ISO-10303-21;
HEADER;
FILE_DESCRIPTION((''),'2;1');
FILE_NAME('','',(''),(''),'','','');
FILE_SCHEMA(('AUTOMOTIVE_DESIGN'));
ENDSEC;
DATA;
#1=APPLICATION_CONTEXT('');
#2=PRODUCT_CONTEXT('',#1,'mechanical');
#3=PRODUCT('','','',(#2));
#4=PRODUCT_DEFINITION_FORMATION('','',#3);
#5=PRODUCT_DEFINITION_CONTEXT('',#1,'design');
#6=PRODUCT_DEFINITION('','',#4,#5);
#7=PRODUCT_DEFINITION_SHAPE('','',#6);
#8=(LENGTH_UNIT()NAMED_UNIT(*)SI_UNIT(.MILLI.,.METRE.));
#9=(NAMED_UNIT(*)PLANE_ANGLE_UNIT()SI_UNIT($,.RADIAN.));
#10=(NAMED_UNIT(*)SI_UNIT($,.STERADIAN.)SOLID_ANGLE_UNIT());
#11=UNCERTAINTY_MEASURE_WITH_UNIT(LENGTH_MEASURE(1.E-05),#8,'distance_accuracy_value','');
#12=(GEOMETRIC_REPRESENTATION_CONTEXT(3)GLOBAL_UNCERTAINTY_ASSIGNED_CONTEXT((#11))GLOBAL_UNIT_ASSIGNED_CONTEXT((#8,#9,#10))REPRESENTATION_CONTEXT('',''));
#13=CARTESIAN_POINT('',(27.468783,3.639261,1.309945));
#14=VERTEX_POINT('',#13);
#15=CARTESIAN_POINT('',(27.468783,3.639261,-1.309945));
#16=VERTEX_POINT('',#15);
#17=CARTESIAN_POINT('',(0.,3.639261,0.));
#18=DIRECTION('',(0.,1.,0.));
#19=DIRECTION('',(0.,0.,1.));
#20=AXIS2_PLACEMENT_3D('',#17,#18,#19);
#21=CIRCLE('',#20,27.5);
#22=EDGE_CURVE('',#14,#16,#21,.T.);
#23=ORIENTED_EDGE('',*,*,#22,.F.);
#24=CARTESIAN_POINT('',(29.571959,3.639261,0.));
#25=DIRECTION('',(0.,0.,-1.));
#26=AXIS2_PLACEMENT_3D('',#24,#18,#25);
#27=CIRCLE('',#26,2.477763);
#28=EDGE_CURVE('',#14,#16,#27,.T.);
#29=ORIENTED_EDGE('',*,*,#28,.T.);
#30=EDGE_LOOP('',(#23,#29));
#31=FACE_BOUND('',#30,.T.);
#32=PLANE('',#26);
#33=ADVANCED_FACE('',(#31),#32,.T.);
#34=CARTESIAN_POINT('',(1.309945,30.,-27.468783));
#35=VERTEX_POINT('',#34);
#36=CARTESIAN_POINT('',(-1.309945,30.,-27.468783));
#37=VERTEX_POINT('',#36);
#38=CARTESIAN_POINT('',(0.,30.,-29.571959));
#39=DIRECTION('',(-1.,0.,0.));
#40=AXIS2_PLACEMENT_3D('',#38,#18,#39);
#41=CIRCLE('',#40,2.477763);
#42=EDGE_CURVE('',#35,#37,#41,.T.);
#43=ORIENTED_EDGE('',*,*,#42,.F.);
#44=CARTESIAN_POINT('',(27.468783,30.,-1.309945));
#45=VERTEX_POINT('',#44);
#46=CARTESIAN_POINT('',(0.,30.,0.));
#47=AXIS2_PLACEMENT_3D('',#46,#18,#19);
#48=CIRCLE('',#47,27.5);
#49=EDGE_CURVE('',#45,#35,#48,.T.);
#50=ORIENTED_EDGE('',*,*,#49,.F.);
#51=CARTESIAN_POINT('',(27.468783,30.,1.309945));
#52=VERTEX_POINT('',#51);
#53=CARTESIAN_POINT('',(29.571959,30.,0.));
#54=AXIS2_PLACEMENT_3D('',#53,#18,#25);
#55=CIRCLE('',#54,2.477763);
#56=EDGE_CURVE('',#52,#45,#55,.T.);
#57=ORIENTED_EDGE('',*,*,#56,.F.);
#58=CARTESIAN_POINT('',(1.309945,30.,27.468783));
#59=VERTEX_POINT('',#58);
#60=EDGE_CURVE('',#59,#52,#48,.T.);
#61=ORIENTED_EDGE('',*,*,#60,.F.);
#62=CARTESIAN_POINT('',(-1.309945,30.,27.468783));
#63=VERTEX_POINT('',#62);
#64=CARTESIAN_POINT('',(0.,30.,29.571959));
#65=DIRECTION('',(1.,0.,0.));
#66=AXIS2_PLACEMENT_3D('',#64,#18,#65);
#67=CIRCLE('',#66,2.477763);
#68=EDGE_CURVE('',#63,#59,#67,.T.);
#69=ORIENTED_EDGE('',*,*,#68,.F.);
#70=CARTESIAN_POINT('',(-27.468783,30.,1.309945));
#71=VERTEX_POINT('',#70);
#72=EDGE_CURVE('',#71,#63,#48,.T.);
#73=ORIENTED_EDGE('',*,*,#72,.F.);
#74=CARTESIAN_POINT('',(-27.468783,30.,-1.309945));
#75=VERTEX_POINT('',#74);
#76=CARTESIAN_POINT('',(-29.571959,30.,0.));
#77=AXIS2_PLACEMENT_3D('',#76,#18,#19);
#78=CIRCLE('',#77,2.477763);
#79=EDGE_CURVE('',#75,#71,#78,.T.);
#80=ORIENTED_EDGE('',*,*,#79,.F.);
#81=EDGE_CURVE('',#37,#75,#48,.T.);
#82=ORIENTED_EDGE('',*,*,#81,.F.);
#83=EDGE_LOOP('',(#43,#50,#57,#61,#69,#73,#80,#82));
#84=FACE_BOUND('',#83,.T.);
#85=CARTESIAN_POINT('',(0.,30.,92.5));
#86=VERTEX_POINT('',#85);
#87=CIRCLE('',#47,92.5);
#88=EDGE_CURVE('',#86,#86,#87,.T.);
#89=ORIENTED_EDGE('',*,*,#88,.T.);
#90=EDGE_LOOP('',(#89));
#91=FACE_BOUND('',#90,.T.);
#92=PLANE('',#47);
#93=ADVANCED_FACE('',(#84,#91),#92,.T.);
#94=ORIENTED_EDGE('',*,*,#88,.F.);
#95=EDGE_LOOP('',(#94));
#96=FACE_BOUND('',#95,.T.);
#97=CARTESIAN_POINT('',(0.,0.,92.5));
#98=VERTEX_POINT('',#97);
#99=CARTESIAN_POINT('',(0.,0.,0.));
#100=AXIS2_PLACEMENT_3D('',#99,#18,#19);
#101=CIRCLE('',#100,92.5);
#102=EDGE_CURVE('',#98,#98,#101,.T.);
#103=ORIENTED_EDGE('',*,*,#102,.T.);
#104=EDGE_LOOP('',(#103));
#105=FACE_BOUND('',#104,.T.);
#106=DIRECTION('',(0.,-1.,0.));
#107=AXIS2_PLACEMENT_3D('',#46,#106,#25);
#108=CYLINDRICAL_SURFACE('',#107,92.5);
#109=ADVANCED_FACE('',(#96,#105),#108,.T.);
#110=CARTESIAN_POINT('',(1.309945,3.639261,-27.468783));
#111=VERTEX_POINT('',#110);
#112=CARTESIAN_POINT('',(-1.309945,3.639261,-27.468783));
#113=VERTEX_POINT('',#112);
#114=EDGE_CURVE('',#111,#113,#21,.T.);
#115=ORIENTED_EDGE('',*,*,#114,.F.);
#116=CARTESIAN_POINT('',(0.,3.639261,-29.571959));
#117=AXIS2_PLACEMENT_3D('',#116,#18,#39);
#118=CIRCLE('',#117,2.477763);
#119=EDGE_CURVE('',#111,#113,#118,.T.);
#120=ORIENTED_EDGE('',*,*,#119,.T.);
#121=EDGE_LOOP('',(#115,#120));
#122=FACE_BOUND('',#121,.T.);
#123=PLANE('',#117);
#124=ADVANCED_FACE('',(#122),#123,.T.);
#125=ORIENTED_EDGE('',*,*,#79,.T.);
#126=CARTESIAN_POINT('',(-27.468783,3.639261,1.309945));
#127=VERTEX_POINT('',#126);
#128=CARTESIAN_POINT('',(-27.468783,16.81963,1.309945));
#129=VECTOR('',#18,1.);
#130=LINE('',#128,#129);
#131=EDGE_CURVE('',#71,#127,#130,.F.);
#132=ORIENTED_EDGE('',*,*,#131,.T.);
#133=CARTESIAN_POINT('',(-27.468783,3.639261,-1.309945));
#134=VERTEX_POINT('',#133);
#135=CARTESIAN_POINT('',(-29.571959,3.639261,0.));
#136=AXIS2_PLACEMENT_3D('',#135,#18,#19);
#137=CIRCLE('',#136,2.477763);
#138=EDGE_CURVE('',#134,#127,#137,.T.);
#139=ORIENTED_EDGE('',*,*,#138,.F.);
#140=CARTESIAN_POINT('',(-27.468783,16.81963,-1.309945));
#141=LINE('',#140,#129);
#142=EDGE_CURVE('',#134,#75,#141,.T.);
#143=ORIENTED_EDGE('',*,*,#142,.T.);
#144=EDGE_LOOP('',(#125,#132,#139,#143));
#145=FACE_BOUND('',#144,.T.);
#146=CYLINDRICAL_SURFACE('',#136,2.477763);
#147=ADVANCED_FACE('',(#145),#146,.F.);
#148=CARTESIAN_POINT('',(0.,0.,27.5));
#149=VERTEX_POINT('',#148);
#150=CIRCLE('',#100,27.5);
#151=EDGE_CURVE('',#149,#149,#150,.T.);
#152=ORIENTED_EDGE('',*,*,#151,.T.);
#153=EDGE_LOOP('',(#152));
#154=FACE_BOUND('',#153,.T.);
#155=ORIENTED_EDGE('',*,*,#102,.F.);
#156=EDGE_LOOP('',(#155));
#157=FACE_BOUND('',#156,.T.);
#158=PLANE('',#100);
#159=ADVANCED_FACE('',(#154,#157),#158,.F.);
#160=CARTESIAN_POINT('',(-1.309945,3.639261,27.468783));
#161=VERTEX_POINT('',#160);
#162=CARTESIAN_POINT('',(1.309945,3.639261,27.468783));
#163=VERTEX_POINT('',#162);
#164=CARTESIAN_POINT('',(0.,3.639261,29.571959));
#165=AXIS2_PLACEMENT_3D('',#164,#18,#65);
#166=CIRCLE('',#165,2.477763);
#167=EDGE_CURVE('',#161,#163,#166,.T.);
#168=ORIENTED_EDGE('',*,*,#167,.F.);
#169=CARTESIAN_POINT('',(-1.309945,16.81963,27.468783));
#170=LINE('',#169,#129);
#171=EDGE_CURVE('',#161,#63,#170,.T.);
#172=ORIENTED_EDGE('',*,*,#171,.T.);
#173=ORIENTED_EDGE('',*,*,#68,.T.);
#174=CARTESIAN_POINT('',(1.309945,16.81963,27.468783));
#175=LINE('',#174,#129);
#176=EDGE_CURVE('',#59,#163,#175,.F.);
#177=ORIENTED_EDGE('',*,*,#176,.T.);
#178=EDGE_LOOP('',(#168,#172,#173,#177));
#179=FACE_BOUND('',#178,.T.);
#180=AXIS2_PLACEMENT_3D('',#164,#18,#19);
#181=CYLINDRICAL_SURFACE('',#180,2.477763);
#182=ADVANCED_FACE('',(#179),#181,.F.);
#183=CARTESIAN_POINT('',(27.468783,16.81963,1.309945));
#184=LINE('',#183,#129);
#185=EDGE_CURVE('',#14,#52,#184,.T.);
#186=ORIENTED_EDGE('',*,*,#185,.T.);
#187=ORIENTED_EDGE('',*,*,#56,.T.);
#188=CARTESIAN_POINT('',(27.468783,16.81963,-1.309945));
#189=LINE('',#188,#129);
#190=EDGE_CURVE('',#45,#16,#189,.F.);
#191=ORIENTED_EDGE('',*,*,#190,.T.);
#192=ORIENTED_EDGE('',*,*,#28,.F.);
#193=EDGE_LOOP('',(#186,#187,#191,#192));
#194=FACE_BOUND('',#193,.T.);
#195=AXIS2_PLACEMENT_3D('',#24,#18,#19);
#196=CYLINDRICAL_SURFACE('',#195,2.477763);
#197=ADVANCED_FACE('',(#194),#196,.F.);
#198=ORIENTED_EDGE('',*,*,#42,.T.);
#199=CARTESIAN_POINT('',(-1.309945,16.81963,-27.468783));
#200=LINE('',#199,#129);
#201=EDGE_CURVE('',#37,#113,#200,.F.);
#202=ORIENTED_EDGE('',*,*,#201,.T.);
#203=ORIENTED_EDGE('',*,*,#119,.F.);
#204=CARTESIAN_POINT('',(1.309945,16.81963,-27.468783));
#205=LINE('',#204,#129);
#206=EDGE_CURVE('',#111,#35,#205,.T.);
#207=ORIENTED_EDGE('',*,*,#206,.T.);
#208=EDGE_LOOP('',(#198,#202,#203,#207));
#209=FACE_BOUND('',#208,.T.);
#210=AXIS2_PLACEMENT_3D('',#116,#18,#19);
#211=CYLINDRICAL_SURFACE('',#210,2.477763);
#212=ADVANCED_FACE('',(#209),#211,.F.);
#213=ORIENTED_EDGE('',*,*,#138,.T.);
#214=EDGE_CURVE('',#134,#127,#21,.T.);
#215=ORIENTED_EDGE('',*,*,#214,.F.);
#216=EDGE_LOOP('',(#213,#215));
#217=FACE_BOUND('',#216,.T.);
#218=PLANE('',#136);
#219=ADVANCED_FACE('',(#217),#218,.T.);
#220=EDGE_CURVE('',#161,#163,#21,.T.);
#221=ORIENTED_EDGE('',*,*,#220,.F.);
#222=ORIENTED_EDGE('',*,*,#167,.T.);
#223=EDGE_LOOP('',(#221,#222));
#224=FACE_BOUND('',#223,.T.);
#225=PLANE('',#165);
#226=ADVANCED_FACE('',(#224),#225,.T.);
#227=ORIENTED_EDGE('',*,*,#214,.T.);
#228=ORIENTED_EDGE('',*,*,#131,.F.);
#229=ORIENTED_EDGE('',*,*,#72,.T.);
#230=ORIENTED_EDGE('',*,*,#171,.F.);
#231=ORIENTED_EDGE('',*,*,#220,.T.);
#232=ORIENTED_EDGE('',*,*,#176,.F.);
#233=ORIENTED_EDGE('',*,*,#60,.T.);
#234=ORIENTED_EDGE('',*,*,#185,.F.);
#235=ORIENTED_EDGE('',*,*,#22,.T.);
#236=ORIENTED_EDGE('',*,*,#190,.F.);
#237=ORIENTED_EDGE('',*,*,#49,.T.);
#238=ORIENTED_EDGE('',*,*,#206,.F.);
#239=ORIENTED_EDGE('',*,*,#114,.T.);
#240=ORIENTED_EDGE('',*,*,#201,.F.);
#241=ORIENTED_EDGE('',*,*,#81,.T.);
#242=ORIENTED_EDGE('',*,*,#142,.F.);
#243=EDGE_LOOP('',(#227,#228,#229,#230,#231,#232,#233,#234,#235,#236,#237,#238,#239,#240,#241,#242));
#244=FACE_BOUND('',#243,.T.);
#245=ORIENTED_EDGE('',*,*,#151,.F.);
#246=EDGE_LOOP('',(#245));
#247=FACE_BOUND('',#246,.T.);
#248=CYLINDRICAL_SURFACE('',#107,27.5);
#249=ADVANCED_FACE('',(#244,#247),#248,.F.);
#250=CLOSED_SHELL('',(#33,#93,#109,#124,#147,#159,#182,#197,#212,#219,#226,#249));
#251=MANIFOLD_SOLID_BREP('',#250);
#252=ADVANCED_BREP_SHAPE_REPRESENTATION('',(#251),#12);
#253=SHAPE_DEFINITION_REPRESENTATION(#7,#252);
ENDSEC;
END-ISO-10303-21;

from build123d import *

# Parameters (mm, degrees)
SKETCH1_R           = 92.5
BOSS_EXTRUDE1_DEPTH = 30
SKETCH2_R           = 27.5
CUT_EXTRUDE1_DEPTH  = 135.210655315
SKETCH3_R           = 2.47776265
CUT_EXTRUDE2_DEPTH  = 26.360739339
CIRPATTERN1_COUNT   = 4


with BuildPart() as part:
    # Sketch1 → Boss-Extrude1 (new body)
    with BuildSketch(Plane(origin=(0, 0, 0), x_dir=(1, 0, 0), z_dir=(0, 1, 0))):
        Circle(SKETCH1_R)
    extrude(amount=BOSS_EXTRUDE1_DEPTH)

    # Sketch2 → Cut-Extrude1 (cut, through all)
    with BuildSketch(Plane(origin=(0, 0, 0), x_dir=(1, 0, 0), z_dir=(0, 1, 0))):
        Circle(SKETCH2_R)
    extrude(amount=CUT_EXTRUDE1_DEPTH, mode=Mode.SUBTRACT)

    # Sketch3 → Cut-Extrude2 (cut)
    with BuildSketch(Plane(origin=(0, 30, 0), x_dir=(1, 0, 0), z_dir=(0, 1, 0))):
        with Locations((-29.571959387, 0)):
            Circle(SKETCH3_R)
    cut_extrude2 = extrude(amount=-CUT_EXTRUDE2_DEPTH, mode=Mode.SUBTRACT)

    # CirPattern1: Cut-Extrude2 ×4 about axis
    cirpattern1_axis = Axis((0, 0, 0), (0, 1, 0))
    for i in range(1, CIRPATTERN1_COUNT):
        add(cut_extrude2.rotate(cirpattern1_axis, i * 360 / CIRPATTERN1_COUNT), mode=Mode.SUBTRACT)


solid = part.part
